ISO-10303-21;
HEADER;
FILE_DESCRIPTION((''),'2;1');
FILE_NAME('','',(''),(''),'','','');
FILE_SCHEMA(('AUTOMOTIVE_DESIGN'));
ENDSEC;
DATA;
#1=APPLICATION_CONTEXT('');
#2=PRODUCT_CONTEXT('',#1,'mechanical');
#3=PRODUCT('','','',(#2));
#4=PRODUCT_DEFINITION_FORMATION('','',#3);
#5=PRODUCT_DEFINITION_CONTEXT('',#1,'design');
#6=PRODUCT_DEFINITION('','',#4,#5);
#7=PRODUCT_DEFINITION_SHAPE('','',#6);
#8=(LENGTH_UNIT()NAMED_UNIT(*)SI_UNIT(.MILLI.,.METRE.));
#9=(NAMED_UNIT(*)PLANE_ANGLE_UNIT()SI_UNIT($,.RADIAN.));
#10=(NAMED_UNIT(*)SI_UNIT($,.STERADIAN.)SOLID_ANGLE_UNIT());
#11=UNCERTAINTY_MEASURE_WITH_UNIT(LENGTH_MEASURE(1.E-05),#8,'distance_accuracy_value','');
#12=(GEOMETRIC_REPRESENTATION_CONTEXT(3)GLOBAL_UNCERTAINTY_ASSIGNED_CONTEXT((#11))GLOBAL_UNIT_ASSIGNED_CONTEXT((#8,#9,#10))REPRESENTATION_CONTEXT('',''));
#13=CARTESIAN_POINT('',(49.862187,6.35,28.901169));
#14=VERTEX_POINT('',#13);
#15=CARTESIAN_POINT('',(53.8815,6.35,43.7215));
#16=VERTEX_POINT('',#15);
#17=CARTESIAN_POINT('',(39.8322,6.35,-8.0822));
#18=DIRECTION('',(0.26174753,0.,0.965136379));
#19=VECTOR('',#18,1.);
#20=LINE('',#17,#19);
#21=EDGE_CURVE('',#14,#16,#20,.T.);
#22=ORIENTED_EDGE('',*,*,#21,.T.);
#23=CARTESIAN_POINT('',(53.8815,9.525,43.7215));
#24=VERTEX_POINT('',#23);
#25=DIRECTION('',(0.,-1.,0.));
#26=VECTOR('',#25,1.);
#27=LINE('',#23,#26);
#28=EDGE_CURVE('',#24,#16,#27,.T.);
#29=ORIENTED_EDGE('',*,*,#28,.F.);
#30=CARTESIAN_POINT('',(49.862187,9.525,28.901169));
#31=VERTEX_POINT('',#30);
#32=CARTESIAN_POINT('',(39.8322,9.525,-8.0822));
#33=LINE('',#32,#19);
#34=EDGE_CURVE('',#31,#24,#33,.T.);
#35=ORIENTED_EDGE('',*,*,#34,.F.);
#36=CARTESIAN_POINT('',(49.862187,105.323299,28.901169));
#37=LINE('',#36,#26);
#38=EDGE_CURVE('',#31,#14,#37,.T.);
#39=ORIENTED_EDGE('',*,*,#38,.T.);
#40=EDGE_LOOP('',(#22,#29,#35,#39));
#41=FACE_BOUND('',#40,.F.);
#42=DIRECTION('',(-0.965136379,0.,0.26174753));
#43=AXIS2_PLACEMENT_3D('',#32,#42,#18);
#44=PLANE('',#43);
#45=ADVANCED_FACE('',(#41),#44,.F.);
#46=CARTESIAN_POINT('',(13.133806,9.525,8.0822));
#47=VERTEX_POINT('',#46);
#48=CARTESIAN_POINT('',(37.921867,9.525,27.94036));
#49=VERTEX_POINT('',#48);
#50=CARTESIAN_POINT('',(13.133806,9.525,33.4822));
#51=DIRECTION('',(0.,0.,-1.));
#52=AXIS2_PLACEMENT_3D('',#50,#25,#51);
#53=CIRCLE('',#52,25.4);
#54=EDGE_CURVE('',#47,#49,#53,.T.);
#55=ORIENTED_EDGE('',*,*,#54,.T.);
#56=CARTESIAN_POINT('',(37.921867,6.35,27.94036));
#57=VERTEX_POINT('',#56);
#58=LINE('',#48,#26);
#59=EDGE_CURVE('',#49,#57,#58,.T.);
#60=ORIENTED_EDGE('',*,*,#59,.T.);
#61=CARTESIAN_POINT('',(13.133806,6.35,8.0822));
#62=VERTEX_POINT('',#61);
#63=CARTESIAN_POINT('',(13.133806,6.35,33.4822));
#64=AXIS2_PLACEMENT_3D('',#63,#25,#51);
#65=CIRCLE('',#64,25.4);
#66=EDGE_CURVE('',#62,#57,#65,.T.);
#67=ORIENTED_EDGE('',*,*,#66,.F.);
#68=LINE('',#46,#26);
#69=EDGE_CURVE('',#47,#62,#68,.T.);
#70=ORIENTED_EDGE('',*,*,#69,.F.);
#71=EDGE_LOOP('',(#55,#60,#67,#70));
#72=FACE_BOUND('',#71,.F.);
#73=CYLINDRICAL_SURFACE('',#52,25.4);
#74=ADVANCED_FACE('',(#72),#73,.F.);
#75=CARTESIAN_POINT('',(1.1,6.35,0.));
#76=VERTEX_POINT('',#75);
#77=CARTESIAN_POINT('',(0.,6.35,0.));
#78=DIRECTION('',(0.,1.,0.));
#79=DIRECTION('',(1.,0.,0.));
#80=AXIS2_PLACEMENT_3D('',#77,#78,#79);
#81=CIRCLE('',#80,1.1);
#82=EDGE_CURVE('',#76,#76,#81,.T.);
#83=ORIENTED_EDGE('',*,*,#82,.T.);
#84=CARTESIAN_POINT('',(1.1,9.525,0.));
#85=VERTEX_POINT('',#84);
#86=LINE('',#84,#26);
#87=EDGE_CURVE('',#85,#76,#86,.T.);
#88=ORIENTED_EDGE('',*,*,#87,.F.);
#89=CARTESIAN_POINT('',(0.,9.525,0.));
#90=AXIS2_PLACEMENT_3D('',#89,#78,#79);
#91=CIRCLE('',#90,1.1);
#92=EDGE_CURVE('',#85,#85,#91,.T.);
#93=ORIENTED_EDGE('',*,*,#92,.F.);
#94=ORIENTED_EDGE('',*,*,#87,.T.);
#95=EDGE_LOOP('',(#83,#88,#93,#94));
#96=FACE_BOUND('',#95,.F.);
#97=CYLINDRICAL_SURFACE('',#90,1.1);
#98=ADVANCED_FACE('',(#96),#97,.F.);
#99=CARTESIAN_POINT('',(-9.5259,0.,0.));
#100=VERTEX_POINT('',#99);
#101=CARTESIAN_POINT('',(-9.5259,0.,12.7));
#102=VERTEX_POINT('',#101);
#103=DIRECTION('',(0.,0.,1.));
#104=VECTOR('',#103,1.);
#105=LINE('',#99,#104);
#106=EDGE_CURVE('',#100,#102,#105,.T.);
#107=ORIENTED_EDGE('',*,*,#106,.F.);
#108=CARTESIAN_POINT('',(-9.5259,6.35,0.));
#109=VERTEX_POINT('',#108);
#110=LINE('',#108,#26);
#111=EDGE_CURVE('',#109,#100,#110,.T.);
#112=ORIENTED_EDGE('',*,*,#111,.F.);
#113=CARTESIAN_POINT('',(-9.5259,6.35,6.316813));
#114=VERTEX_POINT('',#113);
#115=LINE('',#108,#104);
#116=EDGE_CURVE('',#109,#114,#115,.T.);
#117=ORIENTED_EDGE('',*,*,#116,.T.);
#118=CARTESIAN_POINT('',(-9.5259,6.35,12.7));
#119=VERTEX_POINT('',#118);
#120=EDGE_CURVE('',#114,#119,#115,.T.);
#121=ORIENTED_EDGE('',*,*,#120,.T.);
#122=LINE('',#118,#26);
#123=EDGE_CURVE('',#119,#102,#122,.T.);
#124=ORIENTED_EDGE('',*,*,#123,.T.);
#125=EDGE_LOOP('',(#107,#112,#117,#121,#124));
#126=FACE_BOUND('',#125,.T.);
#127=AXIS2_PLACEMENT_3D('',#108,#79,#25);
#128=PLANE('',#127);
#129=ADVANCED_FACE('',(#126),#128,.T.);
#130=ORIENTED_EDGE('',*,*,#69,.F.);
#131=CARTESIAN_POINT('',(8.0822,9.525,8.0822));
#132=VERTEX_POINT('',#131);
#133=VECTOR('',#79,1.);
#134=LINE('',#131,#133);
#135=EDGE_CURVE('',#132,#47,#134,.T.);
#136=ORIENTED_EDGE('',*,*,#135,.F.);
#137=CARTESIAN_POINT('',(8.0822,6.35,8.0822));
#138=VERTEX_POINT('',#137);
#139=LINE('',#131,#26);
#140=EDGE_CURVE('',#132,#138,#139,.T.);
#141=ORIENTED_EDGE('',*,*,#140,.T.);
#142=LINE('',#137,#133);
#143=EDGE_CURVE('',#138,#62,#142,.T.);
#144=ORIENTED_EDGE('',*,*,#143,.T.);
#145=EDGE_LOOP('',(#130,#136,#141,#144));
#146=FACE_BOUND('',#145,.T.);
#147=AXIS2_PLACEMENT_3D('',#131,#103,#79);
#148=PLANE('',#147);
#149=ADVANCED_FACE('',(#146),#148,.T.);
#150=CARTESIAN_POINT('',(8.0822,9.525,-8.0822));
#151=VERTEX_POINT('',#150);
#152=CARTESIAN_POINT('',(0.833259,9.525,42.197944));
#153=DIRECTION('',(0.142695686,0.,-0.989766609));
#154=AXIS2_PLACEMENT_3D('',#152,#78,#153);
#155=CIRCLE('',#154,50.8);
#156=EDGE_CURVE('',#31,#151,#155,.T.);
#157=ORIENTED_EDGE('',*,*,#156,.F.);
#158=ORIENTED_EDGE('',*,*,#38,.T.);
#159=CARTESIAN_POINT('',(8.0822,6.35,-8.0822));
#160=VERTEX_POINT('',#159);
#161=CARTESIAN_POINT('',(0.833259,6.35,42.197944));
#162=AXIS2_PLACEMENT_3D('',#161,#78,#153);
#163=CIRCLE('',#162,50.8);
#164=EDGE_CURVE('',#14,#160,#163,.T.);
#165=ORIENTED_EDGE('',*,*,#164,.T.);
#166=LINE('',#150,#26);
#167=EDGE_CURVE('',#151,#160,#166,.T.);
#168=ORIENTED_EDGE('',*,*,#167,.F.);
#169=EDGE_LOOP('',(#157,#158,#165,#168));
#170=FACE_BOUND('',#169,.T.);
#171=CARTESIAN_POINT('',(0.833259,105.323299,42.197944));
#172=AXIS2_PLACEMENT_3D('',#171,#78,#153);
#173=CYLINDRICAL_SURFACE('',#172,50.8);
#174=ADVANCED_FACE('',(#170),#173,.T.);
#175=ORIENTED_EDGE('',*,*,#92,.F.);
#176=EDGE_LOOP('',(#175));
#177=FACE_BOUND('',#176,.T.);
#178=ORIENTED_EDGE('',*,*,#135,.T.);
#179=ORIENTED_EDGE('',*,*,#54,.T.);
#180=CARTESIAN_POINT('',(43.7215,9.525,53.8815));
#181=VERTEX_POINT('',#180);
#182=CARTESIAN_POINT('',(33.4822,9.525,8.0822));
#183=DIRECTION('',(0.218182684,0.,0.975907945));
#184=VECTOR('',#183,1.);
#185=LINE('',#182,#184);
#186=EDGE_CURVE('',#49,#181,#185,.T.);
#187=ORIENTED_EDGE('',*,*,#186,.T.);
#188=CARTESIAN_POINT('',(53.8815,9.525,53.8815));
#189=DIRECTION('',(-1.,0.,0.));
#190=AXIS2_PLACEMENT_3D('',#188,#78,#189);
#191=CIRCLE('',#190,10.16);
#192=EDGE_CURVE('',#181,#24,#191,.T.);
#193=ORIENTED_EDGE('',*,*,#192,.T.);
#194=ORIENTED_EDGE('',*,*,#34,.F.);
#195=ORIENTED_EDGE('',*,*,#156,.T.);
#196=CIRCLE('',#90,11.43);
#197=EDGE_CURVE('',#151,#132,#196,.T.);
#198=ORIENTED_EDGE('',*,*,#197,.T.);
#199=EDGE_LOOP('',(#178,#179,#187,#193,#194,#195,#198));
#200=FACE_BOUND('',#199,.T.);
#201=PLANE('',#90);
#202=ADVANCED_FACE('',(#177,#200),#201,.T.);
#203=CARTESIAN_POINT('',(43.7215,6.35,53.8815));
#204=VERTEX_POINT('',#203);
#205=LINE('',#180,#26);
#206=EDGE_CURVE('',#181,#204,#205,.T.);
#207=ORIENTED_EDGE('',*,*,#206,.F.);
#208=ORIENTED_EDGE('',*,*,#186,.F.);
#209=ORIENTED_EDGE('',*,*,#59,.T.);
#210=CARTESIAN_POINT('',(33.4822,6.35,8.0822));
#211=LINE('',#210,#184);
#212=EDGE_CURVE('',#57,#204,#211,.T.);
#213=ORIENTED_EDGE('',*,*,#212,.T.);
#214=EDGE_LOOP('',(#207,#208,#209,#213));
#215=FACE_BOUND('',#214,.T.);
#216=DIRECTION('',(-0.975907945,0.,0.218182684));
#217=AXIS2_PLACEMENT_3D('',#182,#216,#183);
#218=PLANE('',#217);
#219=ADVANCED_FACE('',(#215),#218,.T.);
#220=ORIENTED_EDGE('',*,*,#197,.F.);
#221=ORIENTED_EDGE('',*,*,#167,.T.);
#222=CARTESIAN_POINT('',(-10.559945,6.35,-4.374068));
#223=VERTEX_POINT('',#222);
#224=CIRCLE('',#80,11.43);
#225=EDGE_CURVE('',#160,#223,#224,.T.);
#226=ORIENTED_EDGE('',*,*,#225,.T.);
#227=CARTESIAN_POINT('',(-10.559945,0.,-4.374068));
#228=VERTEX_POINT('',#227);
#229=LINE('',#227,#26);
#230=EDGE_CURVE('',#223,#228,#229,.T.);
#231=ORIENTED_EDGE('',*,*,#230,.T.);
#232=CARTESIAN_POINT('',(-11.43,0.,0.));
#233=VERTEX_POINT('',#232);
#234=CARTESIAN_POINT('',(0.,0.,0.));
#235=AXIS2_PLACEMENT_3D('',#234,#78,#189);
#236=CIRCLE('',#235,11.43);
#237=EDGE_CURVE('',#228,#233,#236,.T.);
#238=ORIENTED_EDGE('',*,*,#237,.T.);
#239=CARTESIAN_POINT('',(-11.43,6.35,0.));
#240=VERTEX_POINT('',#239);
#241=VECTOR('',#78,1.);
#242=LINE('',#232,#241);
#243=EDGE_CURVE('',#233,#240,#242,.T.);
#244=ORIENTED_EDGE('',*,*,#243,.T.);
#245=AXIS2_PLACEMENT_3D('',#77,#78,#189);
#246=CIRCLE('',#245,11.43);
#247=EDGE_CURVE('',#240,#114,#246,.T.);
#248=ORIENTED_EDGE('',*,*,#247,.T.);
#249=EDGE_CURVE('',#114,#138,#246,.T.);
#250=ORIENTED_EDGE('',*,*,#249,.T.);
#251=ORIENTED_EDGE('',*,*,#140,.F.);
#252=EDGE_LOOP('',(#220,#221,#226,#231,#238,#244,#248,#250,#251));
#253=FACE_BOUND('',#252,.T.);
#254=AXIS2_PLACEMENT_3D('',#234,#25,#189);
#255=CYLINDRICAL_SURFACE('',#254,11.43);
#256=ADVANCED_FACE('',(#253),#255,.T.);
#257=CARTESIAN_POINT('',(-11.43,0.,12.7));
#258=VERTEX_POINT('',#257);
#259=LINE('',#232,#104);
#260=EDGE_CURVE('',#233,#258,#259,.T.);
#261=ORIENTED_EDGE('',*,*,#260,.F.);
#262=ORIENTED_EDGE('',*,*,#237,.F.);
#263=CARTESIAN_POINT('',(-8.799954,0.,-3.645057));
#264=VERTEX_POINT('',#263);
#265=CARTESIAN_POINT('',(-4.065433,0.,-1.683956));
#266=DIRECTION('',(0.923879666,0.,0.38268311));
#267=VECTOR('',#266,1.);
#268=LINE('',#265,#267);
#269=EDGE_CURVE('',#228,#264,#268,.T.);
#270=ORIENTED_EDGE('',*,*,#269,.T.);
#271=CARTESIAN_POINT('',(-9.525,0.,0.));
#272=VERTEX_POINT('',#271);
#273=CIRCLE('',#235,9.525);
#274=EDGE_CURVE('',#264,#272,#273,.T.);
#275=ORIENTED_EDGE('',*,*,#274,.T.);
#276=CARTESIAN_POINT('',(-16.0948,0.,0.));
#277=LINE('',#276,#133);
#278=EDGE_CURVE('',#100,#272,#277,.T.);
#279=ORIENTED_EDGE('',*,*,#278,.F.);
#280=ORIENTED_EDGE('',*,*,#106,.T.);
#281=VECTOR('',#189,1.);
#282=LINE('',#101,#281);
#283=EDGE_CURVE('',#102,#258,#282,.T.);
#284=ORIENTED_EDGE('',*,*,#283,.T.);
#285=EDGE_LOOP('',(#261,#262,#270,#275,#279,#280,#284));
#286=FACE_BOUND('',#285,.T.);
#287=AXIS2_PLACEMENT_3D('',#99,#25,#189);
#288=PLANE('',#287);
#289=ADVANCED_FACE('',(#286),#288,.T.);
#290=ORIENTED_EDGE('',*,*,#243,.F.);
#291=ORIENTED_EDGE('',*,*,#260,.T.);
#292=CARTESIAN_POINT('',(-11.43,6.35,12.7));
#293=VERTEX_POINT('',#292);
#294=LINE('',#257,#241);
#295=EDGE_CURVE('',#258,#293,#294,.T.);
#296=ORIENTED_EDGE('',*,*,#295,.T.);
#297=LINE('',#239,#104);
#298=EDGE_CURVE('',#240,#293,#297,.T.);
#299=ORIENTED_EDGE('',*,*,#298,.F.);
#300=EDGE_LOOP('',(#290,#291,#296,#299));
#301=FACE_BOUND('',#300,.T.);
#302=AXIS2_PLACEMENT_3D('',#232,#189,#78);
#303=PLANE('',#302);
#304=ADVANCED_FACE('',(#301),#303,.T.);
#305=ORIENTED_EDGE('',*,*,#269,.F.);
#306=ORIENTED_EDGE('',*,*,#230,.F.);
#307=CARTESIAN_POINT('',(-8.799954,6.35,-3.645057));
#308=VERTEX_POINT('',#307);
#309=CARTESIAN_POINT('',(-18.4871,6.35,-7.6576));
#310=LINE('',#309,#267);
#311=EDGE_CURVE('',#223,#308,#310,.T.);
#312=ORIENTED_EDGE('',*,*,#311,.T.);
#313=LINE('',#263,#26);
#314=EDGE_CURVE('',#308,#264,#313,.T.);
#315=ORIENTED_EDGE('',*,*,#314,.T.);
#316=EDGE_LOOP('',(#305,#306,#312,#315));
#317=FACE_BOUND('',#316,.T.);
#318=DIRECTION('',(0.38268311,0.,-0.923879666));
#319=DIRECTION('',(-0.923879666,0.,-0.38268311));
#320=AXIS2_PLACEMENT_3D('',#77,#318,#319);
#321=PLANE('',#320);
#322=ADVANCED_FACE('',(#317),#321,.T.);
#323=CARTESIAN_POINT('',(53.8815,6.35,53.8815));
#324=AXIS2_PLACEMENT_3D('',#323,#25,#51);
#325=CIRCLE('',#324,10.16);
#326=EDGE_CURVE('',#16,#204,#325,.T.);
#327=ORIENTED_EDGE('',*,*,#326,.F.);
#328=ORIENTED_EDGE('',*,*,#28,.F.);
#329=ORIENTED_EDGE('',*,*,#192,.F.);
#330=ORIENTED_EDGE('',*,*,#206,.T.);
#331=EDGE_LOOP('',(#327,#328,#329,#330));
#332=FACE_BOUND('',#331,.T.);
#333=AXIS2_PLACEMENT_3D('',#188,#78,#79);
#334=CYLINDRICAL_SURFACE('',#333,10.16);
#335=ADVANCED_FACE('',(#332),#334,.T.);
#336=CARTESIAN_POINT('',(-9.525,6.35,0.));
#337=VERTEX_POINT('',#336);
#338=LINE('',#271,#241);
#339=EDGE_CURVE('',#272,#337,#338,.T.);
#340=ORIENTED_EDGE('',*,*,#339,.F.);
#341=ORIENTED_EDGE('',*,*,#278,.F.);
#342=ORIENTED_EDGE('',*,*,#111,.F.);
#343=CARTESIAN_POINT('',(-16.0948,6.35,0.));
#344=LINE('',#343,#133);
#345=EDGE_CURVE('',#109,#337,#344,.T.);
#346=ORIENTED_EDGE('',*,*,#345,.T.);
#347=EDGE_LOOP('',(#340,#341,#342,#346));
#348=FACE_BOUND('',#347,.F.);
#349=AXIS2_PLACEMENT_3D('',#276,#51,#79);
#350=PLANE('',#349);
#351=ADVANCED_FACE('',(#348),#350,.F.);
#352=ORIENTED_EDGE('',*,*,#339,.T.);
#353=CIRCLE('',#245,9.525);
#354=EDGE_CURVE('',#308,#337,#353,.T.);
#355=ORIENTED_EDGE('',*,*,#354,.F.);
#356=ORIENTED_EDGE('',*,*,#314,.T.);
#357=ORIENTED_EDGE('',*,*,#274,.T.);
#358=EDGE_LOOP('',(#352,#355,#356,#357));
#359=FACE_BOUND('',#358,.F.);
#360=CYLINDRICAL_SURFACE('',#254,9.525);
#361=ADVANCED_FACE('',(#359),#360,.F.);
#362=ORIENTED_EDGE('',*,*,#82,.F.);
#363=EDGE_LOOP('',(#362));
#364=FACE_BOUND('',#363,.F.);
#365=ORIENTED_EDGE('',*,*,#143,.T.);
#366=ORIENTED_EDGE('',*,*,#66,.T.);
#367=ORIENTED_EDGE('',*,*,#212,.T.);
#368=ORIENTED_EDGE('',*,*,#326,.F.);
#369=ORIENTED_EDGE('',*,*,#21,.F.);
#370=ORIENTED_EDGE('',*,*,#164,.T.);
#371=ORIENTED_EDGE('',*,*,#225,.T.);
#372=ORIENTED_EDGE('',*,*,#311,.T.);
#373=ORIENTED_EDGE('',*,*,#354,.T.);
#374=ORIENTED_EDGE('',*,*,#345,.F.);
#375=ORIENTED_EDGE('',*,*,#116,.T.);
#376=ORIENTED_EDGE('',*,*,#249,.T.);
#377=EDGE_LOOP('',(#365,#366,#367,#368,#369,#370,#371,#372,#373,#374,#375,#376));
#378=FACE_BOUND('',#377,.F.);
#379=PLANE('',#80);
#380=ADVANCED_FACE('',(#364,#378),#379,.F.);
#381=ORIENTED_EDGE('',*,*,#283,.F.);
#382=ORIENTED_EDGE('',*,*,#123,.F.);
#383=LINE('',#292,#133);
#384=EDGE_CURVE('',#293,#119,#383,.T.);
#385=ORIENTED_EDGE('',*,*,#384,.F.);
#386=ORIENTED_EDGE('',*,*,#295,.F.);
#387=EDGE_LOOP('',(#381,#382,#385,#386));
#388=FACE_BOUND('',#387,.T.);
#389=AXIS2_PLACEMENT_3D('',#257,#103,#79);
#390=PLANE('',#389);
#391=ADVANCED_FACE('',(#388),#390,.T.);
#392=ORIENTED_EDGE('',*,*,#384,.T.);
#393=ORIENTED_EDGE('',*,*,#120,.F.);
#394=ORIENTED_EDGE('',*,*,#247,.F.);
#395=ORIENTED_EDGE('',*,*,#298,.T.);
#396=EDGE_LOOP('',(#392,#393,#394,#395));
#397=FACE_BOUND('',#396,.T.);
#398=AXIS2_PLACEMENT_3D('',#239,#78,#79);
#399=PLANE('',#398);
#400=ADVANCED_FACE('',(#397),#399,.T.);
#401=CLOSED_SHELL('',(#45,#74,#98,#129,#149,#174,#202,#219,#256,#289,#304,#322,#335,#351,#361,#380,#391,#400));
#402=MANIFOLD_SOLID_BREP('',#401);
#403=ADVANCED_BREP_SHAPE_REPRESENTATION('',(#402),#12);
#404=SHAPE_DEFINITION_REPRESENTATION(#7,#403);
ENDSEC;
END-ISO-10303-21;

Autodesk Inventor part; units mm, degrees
ref_plane "YZ Plane" through (0, 0, 0) normal (1, 0, 0) x (0, 1, 0)
ref_plane "XZ Plane" through (0, 0, 0) normal (0, 1, 0) x (-1, 0, 0)
ref_plane "XY Plane" through (0, 0, 0) normal (0, 0, 1) x (1, 0, 0)
sketch "Sketch1" plane through (0, 0, 0) normal (0, 1, 0) x (-1, 0, 0)
  circle A0 centre (0, 0) radius 11.43
  circle A1 centre (0, 0) radius 9.525
  dimension "d0" = 22.86
  dimension "d1" = 19.05
extrude "Extrusion1" add sketch "Sketch1" along normal blind 6.35
sketch "Sketch2" plane through (0, 6.35, 0) normal (0, 1, 0) x (1, 0, 0)
  circle A0 centre (0, 0) radius 11.43
extrude "Extrusion2" add sketch "Sketch2" along normal blind 3.175
sketch "Sketch3" plane through (0, 9.525, 0) normal (0, 1, 0) x (1, 0, 0)
  circle A0 centre (0, 0) radius 1.1
  dimension "d6" = 2.2
extrude "Extrusion3" cut sketch "Sketch3" against normal blind 7.9375
sketch "Sketch6" plane through (0, 0, 0) normal (0, -1, 0) x (1, 0, 0)
  line L0 (-16.0948, 0) -> (0, 0)
  line L1 (0, 0) -> (0, -15.3841)
  line L2 (0, -15.3841) -> (-16.0948, -15.3841)
  line L3 (-16.0948, -15.3841) -> (-16.0948, 0)
  line L4 (-16.0948, 14.6504) -> (12.3807, 14.6504)
  line L5 (12.3807, 14.6504) -> (12.3807, -15.3841)
  line L6 (12.3807, -15.3841) -> (-16.0948, -15.3841)
  line L7 (-16.0948, -15.3841) -> (-16.0948, 14.6504)
extrude "Extrusion6" cut sketch "Sketch6" against normal blind 6.35 contours L7 L4 L5 L6 L1 L0
sketch "Sketch7" plane through (0, 0, -9.525) normal (1, 0, 0) x (0, 0, -1)
  line L0 (1.905, 6.35) -> (-20.955, 6.35) projected
  line L1 (1.905, 6.35) -> (0, 6.35)
  line L2 (0, 6.35) -> (0, 0)
  line L3 (0, 0) -> (1.905, 0)
  line L4 (1.905, 0) -> (1.905, 6.35)
  point P0 (-9.525, 0)
  point P1 (-9.525, 6.35)
extrude "Extrusion7" add sketch "Sketch7" along normal blind 11.43
sketch "Sketch16" plane through (0, 0, 0) normal (0, -1, 0) x (1, 0, 0)
  point P0 (0, 0)
sketch "Sketch17" plane through (-11.43, 0, 0) normal (0, 0, 1) x (1, 0, 0)
  line L0 (0, 0) -> (0, 6.35) projected
  line L1 (0, 6.35) -> (1.9041, 6.35)
  line L2 (1.9041, 6.35) -> (1.9041, 0)
  line L3 (1.9041, 0) -> (0, 0)
  line L4 (0, 0) -> (0, 6.35)
  point P0 (11.43, 0)
extrude "Extrusion16" add sketch "Sketch17" along normal blind 12.7
sketch "Sketch18" plane through (0, 6.35, 0) normal (0, -1, 0) x (1, 0, 0)
  circle A0 centre (0, 0) radius 1.1 projected
  line L0 (0, 0) -> (-18.4871, -7.6576)
  line L1 (0, 0) -> (20.0102, 0) construction
  line L2 (-18.4871, -7.6576) -> (1.1, -41.4972)
  line L3 (1.1, -41.4972) -> (21.3747, 0)
  line L4 (21.3747, 0) -> (0, 0)
  dimension "d61" = 157.5
extrude "Extrusion17" cut sketch "Sketch18" along normal blind 25.4 contours L4 L3 L2 L0 A0 | A0 L0 L4 picked at (-0.5236, -0.5052)
sketch "Sketch21" plane through (0, 9.525, 0) normal (0, 1, 0) x (1, 0, 0)
  line L0 (0, 0) -> (76.2, 0) construction
  circle A0 centre (0, 0) radius 11.43 projected
  line L1 (8.0168, -8.1472) -> (33.4168, -8.1472)
  line L2 (8.0168, -8.1472) -> (33.4168, -8.1472) construction
  circle A1 centre (53.8815, -53.8815) radius 10.16
  line L3 (33.4168, -8.1472) -> (46.6973, -46.6973)
  line L4 (8.0822, 8.0822) -> (38.5622, 8.0822)
  line L5 (53.8815, -53.8815) -> (61.0657, -46.6973)
  line L6 (53.8815, -53.8815) -> (64.0415, -53.8815) construction
  line L7 (61.0657, -46.6973) -> (38.5622, 8.0822)
  line L8 (0, 0) -> (8.0168, -8.1472)
  line L9 (46.6973, -46.6973) -> (53.8815, -53.8815)
  line L10 (8.0168, 8.1472) -> (8.0168, -8.1472)
  dimension "d85" = 25.4
  dimension "d86" = 0
  dimension "d87" = 20.32
  dimension "d88" = 30.48
  dimension "d89" = 45
extrude "Extrusion20" add sketch "Sketch21" against normal blind 3.175 contours L5 L9 A1 | A1 L9 L5
sketch "Sketch22" plane through (0, 9.525, 0) normal (0, 1, 0) x (1, 0, 0)
  circle A0 centre (0, 0) radius 1.1 projected
  line L0 (0, 0) -> (8.0822, 8.0822)
  circle A1 centre (0, 0) radius 11.43 projected
  line L1 (0, 0) -> (11.43, 0) construction
  line L2 (8.0822, 8.0822) -> (39.8322, 8.0822)
  line L3 (39.8322, 8.0822) -> (53.8815, -43.7215)
  circle A2 centre (53.8815, -53.8815) radius 10.16 projected
  line L4 (0, 0) -> (8.0822, -8.0822)
  line L5 (8.0822, -8.0822) -> (33.4822, -8.0822)
  line L6 (33.4822, -8.0822) -> (43.7215, -53.8815)
  line L7 (53.8815, -43.7215) -> (43.7215, -53.8815)
  dimension "d92" = 45
  dimension "d93" = 31.75
  dimension "d94" = 25.4
extrude "Extrusion21" add sketch "Sketch22" against normal blind 3.175 contours L2 L3 A2 L6 L5 A1
fillet "Fillet6" radius 25.4 1 edges at (33.4822, 7.9375, 8.0822)
fillet "Fillet7" radius 50.8 1 edges at (39.8322, 7.9375, -8.0822)
